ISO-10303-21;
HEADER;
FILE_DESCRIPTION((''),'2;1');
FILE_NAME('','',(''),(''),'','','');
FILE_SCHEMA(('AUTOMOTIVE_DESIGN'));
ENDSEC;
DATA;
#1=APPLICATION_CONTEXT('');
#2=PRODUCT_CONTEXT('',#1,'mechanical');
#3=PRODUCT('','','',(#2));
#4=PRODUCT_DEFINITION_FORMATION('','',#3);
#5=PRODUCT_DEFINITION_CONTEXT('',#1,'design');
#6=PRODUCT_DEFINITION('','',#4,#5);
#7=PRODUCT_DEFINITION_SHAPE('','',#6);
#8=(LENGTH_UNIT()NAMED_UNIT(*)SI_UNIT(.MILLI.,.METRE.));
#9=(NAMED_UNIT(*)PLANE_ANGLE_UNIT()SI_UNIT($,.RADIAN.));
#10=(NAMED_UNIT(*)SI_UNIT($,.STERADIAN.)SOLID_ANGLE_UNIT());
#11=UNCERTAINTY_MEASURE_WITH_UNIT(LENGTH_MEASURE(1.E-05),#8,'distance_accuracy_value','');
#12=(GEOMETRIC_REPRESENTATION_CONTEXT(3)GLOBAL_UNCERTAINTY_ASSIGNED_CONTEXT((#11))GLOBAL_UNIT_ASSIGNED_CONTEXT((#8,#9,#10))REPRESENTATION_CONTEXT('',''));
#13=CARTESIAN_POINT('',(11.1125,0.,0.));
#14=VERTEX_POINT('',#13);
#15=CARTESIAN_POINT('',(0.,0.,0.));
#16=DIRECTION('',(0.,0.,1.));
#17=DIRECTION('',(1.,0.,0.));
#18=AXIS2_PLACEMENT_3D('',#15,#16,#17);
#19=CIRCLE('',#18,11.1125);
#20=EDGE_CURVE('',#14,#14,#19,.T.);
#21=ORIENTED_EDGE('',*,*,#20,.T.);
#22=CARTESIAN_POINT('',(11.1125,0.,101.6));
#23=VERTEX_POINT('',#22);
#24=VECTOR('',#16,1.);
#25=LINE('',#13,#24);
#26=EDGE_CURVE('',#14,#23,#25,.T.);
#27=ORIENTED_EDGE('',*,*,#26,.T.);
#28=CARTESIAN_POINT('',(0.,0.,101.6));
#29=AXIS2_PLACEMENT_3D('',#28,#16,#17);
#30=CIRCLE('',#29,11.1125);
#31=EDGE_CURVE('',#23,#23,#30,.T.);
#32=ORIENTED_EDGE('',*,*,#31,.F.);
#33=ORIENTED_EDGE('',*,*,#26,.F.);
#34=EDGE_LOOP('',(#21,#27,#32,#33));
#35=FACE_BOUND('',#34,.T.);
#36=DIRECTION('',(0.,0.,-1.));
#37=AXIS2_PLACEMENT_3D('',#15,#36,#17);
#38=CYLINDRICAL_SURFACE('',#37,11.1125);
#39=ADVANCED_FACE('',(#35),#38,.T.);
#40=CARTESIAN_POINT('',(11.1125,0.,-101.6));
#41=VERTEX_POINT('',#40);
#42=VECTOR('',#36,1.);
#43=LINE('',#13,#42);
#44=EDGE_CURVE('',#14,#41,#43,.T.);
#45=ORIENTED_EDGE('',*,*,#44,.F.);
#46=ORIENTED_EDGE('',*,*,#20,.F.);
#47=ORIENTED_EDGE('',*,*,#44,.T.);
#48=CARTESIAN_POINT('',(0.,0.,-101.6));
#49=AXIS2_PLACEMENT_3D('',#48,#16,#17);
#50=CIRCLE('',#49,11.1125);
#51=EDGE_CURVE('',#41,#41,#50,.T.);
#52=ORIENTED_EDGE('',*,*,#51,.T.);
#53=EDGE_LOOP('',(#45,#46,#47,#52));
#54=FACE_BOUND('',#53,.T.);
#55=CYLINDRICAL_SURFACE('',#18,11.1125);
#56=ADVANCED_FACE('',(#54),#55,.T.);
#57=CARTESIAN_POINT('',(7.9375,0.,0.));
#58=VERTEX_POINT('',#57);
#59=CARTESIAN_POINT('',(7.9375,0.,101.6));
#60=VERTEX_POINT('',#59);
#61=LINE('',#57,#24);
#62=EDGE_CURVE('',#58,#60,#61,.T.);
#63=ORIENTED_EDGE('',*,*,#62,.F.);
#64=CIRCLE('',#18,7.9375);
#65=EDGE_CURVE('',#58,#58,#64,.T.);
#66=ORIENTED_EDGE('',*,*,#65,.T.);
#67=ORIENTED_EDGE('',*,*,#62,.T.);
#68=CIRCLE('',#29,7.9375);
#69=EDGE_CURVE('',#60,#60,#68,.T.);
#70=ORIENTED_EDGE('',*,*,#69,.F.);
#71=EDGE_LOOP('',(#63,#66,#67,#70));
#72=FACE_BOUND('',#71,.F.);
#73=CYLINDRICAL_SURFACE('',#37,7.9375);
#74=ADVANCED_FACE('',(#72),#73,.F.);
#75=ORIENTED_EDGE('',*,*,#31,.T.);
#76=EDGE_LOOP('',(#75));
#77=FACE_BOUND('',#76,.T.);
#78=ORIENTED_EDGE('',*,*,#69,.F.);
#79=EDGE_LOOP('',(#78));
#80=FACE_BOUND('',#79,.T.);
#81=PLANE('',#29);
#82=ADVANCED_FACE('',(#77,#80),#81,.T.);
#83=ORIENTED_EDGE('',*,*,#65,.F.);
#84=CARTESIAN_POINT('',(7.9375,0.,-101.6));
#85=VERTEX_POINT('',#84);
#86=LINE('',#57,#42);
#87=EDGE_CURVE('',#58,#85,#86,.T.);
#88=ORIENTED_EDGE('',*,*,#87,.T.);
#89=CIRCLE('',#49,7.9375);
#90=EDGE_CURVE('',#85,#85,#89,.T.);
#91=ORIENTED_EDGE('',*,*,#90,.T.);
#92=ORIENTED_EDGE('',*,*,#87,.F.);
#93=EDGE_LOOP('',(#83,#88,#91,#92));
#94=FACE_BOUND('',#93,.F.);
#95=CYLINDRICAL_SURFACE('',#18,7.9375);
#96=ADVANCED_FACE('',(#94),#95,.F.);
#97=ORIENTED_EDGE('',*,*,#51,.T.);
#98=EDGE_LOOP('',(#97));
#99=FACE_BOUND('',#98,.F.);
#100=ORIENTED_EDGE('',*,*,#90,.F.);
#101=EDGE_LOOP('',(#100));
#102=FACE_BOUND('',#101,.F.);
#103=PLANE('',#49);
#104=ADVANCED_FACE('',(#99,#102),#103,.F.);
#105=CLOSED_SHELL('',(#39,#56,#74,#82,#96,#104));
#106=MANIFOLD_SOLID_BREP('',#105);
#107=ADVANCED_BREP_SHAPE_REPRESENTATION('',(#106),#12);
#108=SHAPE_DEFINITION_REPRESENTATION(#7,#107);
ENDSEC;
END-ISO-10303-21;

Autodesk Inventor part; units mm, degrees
ref_plane "YZ Plane" through (0, 0, 0) normal (1, 0, 0) x (0, 1, 0)
ref_plane "XZ Plane" through (0, 0, 0) normal (0, 1, 0) x (-1, 0, 0)
ref_plane "XY Plane" through (0, 0, 0) normal (0, 0, 1) x (1, 0, 0)
sketch "Sketch1" plane through (0, 0, 0) normal (0, 0, 1) x (1, 0, 0)
  circle A0 centre (0, 0) radius 11.1125
  circle A1 centre (0, 0) radius 7.9375
  dimension "d0" = 22.225
  dimension "d1" = 3.175
extrude "Extrusion1" add sketch "Sketch1" along normal mid plane 203.2
thread "Thread1" size "7/8-9 UNC" class "2A" standard "ANSI Unified Screw Threads" length 25.4
thread "Thread2" size "7/8-9 UNC" class "2A" standard "ANSI Unified Screw Threads" length 25.4
equation "\"d6\" = d4"
equation "\"d4\" = 25.4"
properties part number "EL2-A-005" material "Aluminum 6061"
